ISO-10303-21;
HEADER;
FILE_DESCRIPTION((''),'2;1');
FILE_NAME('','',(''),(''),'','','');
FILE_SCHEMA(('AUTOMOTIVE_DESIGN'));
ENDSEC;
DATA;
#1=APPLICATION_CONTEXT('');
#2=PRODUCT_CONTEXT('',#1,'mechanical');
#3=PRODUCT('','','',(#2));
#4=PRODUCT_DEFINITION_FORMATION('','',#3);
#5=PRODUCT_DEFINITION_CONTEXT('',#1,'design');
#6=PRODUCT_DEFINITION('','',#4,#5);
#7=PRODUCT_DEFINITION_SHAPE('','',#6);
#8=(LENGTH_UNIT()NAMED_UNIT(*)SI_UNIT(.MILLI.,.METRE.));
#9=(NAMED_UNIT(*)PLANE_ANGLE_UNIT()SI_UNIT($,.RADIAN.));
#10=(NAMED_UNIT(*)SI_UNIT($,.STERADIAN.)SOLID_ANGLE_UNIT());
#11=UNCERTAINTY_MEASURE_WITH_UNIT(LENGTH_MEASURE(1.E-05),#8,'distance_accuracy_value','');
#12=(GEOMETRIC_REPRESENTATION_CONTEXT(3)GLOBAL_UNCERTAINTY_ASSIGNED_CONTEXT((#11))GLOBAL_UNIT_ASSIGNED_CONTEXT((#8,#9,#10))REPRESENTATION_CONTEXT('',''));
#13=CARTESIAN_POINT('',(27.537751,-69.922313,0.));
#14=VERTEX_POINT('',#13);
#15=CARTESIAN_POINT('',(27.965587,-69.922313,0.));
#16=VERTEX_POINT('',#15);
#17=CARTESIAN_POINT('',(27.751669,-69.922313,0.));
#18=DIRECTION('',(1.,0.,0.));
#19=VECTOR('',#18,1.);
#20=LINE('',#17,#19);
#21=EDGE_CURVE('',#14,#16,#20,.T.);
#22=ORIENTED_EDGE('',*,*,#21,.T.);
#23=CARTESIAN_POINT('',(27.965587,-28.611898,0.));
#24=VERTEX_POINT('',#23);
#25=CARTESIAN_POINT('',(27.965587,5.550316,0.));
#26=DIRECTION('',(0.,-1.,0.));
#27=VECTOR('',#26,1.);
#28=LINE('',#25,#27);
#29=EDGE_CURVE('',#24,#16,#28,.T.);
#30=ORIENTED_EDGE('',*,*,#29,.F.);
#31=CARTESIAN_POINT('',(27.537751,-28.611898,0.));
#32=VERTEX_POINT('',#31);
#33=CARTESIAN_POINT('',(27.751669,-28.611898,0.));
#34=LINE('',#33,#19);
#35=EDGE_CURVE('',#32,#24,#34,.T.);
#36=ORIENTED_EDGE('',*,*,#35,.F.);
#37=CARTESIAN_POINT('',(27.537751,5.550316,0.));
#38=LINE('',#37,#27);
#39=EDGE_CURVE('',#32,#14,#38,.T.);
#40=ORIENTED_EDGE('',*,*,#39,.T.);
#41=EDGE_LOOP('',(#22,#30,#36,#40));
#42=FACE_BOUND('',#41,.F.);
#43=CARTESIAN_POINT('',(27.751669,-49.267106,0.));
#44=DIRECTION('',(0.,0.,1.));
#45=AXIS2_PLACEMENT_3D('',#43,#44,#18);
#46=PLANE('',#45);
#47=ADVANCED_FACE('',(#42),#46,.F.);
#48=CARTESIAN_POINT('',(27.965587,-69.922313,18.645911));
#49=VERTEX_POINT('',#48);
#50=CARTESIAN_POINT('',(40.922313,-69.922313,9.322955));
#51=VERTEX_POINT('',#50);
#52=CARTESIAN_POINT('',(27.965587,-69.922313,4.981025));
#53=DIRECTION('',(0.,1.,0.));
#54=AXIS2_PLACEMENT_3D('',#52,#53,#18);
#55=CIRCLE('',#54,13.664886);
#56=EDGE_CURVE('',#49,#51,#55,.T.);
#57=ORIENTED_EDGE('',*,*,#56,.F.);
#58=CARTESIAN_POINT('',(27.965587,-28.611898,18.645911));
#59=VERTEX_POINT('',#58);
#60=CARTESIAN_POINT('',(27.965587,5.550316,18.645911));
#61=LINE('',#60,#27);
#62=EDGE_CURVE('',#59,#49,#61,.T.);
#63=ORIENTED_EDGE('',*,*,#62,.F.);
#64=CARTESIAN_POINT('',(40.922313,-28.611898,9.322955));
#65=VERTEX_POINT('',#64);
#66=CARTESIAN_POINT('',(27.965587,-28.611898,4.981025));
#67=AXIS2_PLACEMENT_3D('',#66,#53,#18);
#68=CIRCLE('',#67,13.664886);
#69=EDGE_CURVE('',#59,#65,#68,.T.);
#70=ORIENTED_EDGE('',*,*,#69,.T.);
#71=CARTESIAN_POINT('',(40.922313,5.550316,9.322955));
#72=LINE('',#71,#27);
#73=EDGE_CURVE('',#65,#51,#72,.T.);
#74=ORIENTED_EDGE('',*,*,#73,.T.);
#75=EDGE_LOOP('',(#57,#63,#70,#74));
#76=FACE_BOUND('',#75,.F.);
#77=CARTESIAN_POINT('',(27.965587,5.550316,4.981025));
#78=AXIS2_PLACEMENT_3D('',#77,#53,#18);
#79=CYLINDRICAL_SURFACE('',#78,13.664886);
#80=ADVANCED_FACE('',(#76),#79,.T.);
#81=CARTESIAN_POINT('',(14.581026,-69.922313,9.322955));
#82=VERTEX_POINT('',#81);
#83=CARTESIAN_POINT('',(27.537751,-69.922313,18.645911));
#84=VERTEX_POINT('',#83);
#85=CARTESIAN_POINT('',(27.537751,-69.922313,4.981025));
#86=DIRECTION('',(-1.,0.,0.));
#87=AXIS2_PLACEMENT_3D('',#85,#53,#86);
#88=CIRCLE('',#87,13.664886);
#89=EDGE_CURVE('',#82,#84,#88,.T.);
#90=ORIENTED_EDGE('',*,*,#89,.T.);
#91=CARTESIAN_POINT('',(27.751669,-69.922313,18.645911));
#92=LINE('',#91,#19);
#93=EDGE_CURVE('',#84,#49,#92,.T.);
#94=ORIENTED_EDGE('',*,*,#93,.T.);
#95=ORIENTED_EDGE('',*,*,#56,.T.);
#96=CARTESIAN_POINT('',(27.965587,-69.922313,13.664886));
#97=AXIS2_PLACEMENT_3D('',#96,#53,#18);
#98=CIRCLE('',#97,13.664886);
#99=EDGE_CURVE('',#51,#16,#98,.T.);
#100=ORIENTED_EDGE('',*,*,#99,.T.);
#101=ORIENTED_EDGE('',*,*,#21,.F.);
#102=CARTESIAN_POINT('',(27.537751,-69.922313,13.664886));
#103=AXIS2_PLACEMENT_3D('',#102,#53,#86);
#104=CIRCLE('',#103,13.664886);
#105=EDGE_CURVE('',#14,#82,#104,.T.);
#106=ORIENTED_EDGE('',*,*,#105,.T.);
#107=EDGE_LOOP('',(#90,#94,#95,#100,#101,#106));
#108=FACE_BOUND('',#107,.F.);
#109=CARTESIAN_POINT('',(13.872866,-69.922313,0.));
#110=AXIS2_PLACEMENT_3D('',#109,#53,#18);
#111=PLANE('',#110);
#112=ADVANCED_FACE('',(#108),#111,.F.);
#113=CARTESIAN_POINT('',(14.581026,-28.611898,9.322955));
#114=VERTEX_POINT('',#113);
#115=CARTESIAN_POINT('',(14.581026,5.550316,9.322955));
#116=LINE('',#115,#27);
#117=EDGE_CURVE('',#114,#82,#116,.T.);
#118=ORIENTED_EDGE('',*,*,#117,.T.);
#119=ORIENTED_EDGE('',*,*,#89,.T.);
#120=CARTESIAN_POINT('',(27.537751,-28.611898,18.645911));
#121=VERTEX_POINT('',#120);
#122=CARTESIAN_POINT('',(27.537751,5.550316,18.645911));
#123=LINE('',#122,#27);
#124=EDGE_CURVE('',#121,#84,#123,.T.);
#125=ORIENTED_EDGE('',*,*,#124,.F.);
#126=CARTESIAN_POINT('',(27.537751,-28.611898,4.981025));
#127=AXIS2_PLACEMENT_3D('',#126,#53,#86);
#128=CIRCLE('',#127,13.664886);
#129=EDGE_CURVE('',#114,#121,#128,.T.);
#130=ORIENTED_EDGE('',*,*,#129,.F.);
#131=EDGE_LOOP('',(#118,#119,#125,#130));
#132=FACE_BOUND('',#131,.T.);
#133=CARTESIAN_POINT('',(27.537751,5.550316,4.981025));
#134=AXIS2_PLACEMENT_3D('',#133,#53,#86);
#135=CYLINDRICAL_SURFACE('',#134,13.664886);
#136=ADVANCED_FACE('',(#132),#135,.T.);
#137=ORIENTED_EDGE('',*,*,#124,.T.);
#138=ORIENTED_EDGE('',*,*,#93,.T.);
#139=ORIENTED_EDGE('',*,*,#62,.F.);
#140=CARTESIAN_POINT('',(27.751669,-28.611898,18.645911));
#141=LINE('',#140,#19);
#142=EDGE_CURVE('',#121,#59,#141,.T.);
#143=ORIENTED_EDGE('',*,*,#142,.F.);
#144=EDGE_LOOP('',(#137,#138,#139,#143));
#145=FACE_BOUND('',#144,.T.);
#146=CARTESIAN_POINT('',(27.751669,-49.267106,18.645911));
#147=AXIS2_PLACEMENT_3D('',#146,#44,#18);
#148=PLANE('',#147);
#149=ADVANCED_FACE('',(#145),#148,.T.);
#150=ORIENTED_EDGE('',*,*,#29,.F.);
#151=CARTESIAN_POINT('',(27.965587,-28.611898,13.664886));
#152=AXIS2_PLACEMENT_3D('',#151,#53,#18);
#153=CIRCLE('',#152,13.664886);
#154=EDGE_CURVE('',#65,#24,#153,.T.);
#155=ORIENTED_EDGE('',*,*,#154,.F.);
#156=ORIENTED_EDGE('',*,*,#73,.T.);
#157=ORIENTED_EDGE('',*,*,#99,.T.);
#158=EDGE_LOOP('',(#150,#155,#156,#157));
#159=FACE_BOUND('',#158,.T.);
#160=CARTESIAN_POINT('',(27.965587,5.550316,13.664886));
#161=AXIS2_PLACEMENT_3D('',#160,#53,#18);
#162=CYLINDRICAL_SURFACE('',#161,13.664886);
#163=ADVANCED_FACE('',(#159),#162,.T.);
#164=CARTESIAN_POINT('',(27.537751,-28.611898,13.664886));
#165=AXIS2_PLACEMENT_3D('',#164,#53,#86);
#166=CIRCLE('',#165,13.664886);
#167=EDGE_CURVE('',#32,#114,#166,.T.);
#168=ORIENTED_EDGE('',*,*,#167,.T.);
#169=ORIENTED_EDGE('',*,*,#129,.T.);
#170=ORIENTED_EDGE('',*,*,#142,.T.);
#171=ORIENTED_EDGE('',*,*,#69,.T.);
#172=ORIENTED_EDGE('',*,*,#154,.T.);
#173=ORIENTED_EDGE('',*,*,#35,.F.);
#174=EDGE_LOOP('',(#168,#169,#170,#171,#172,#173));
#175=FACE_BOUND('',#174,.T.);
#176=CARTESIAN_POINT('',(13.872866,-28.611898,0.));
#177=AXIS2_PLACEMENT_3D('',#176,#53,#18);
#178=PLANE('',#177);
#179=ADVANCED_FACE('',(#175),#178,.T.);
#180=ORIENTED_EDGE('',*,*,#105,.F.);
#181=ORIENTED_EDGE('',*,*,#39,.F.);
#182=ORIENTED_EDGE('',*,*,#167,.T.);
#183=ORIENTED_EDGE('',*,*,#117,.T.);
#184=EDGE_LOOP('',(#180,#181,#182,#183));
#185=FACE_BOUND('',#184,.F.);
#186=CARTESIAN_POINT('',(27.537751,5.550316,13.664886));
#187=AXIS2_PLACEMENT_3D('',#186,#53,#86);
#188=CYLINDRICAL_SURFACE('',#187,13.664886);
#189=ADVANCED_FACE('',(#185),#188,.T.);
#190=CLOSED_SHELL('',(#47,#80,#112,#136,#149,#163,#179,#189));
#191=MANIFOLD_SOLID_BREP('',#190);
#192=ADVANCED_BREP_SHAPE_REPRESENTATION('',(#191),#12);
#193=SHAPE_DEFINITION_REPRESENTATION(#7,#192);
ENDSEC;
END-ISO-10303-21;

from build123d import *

# Parameters (mm, degrees)
F0_W        = 27.7576074004
F0_H        = 41.3104146719
F1_DEPTH    = 18.6459105462
F2_T1_DEPTH = 109.6348425509


# Not quite as in the source:
# - a fillet or chamfer that OpenCascade refuses, or shapes differently, is made with other operations: its cross-section is extruded or revolved along the edge and cut away or added


with BuildPart() as f1:
    # F0 (on Top) → F1 (new body)
    with BuildSketch(Plane.XY):
        with Locations((27.7516692877, -49.2671057582)):
            Rectangle(F0_W, F0_H)
    extrude(amount=F1_DEPTH)

    # F2: fillet of radius 13.6648855758 on 4 edges, made by hand

    # F2_s2 → F2_t1 (cut)
    with BuildSketch(Plane.XZ.offset(-5.5503155173)):
        with BuildLine():
            ThreePointArc((41.6304729879, 4.9810249704), (37.6281206669, 14.6435582252), (27.9655874121, 18.6459105462))
            Line((27.9655874121, 18.6459105462), (41.6304729879, 18.6459105462))
            Line((41.6304729879, 18.6459105462), (41.6304729879, 4.9810249704))
        make_face()
        with BuildLine():
            ThreePointArc((13.8728655875, 4.9810249704), (17.8752179085, 14.6435582252), (27.5377511633, 18.6459105462))
            Line((27.5377511633, 18.6459105462), (13.8728655875, 18.6459105462))
            Line((13.8728655875, 18.6459105462), (13.8728655875, 4.9810249704))
        make_face()
        with BuildLine():
            ThreePointArc((41.6304729879, 13.6648855758), (37.6281206669, 4.002352321), (27.9655874121, 0))
            Line((27.9655874121, 0), (41.6304729879, 0))
            Line((41.6304729879, 0), (41.6304729879, 13.6648855758))
        make_face()
        with BuildLine():
            ThreePointArc((13.8728655875, 13.6648855758), (17.8752179085, 4.002352321), (27.5377511633, 0))
            Line((27.5377511633, 0), (13.8728655875, 0))
            Line((13.8728655875, 0), (13.8728655875, 13.6648855758))
        make_face()
    extrude(amount=F2_T1_DEPTH, mode=Mode.SUBTRACT)


solid = f1.part
